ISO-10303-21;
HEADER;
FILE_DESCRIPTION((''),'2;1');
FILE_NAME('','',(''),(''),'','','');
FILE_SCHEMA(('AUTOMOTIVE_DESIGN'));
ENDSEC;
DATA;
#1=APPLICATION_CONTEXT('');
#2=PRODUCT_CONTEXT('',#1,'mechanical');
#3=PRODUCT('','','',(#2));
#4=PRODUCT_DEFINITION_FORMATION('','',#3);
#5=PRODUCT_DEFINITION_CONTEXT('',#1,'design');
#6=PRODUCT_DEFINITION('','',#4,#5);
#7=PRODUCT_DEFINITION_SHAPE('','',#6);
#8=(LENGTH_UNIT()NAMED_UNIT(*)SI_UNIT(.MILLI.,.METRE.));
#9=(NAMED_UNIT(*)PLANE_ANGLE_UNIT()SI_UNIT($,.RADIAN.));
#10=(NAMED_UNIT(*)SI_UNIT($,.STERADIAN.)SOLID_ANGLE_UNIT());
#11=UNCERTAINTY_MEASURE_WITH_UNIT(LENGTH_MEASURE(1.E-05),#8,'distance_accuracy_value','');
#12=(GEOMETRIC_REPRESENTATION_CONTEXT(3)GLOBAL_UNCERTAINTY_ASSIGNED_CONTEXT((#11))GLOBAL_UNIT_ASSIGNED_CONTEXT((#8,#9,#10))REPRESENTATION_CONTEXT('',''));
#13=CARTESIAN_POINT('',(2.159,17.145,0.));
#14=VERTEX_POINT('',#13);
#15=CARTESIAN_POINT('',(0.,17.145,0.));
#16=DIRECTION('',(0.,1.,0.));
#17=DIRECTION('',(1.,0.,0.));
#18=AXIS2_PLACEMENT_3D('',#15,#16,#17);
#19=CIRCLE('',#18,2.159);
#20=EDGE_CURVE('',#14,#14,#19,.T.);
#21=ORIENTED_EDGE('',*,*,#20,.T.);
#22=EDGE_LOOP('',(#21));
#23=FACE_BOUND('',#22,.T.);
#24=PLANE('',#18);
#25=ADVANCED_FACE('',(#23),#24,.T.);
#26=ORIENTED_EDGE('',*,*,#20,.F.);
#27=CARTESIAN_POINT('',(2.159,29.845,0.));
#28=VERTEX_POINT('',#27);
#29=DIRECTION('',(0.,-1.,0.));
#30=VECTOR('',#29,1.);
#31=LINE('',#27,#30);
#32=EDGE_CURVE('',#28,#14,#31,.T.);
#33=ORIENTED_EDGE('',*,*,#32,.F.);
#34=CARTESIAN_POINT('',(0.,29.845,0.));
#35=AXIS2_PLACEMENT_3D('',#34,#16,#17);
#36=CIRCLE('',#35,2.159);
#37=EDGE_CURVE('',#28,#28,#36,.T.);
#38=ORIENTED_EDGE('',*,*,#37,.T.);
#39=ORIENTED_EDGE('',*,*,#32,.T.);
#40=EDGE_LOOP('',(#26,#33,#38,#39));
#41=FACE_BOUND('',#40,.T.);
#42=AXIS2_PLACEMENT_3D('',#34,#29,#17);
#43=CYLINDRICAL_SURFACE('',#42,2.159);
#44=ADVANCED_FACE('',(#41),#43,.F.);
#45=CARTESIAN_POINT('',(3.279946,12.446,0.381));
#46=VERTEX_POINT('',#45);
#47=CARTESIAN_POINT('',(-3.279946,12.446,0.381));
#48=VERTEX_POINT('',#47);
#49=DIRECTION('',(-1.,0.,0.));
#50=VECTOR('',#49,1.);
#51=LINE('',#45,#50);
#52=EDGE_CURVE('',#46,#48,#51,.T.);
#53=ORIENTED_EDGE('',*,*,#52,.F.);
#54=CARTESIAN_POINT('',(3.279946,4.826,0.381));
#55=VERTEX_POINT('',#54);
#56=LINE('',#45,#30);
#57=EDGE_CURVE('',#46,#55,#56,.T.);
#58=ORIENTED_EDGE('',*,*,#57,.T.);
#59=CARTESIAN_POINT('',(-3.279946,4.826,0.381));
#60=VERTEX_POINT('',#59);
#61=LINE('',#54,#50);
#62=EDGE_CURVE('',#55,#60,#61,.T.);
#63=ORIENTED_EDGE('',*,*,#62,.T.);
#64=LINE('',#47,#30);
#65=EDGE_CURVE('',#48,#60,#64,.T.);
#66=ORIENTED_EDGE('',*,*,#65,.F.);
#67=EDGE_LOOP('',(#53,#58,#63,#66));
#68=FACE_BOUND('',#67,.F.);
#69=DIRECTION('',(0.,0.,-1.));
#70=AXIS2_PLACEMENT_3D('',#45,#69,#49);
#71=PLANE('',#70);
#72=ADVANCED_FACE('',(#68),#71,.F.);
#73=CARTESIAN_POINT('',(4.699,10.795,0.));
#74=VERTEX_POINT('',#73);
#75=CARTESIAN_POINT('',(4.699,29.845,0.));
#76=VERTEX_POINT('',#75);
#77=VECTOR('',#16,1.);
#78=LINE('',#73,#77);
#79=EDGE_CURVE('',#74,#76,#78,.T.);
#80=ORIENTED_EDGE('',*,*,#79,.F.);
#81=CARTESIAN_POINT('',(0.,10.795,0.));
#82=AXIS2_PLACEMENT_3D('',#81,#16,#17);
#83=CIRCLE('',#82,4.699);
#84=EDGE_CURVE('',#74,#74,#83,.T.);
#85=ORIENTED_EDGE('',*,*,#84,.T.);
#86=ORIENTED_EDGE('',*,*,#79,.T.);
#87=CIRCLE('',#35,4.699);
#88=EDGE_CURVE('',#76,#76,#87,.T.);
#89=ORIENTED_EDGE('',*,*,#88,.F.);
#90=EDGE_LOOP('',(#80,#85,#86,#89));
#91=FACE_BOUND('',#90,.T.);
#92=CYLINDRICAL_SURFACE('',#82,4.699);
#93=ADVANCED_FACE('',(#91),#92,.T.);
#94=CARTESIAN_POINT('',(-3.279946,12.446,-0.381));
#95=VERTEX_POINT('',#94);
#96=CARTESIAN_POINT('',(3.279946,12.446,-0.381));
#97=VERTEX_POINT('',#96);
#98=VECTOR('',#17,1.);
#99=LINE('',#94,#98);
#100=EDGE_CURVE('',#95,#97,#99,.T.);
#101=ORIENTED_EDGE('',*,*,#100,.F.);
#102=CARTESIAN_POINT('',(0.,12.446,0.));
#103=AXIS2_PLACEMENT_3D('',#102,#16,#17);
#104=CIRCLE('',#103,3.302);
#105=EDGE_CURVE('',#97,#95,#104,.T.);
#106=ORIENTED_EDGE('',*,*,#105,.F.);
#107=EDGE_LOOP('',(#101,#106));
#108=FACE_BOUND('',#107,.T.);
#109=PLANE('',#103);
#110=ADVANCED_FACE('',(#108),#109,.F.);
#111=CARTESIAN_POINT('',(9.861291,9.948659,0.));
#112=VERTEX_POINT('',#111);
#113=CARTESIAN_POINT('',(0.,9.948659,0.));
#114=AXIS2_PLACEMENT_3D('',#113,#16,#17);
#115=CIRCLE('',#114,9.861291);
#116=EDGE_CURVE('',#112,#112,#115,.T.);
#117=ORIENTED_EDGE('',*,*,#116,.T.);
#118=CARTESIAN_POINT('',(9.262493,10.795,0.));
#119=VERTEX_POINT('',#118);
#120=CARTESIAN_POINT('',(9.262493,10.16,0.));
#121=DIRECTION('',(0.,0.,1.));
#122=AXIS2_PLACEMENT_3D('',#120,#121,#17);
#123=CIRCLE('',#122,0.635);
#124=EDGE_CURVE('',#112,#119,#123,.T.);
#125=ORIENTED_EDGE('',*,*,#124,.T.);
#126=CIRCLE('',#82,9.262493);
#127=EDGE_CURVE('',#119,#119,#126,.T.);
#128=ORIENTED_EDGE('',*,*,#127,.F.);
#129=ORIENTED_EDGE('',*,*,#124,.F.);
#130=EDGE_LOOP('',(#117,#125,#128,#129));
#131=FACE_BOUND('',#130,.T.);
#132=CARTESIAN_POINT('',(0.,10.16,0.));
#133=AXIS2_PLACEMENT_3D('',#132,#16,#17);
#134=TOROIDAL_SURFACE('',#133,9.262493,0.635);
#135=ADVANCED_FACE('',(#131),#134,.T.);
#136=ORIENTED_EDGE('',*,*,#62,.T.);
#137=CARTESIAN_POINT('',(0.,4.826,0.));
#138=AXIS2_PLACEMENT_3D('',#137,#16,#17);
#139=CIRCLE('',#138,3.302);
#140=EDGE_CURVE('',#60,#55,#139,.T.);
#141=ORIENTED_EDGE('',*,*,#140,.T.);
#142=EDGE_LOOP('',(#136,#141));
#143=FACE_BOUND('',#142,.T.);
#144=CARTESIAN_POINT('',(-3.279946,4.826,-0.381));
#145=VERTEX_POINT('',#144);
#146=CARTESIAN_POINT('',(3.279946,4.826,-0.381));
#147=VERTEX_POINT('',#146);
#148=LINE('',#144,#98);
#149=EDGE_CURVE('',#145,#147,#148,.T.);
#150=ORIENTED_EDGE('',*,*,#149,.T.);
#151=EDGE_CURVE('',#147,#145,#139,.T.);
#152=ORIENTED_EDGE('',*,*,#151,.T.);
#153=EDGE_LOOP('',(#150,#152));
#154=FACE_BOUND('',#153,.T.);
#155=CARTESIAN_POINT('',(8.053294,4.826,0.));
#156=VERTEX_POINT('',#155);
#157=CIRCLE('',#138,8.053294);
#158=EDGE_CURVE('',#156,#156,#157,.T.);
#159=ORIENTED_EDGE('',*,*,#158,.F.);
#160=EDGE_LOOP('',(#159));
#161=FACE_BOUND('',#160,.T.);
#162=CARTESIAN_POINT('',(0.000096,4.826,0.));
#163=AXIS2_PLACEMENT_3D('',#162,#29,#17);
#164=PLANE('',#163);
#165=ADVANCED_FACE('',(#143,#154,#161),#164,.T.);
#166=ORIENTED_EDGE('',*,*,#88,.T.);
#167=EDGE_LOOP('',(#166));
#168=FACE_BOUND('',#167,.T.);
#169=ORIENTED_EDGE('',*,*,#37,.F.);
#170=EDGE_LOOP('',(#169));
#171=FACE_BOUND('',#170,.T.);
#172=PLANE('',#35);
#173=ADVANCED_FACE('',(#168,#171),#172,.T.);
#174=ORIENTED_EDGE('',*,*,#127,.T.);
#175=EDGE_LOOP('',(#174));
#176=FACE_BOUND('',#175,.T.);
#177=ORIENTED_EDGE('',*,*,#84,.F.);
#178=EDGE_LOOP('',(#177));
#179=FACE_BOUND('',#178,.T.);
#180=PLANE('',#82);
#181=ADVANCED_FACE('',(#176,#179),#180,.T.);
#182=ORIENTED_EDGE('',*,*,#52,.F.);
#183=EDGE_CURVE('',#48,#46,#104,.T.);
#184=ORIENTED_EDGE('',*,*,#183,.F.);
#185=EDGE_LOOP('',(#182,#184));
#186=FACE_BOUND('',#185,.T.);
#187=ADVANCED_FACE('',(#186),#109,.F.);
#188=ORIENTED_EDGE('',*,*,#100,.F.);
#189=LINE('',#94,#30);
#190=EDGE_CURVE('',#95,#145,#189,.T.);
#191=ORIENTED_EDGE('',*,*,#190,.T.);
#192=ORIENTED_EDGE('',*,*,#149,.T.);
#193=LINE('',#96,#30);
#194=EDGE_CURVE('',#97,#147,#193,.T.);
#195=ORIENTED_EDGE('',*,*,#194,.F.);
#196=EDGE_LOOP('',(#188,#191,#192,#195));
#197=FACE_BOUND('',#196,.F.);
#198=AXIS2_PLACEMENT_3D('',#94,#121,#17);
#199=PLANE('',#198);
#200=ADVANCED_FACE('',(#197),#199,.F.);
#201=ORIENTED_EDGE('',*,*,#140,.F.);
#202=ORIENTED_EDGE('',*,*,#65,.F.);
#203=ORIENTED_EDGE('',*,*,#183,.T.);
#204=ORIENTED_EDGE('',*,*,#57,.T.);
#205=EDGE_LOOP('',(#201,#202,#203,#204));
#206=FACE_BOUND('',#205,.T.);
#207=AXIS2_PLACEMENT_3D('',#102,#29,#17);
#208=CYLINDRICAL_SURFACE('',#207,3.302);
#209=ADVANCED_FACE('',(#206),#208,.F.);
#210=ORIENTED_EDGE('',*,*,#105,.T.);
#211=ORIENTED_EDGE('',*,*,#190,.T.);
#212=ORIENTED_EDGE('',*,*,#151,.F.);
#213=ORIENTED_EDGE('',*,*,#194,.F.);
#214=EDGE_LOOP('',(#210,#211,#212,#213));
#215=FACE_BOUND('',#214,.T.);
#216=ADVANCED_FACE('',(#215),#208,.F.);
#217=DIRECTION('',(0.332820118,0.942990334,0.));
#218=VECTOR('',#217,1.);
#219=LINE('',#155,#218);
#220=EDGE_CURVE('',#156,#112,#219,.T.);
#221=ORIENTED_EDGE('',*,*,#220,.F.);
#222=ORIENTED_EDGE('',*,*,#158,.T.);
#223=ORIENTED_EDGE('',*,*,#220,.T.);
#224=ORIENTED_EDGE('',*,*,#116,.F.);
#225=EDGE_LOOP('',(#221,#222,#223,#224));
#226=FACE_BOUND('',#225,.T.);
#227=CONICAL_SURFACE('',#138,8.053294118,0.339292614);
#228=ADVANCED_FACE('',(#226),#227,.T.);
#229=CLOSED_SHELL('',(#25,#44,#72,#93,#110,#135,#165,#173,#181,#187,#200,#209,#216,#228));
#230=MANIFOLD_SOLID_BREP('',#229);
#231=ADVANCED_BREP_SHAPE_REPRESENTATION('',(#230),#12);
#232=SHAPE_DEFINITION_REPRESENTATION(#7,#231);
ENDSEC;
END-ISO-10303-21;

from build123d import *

# Parameters (mm, degrees)
F3_DEPTH = 7.62
F4_R     = 0.635


with BuildPart() as f1:
    # F0 (on Top) → F1 (revolve)
    with BuildSketch(Plane.XY):
        Polygon((3.302, 7.62), (3.302, 4.826), (8.0532941176, 4.826), (10.16, 10.795), (4.699, 10.795), (3.302, 10.795), align=None)
        Polygon((0, 17.145), (0, 12.446), (3.302, 12.446), (3.302, 10.795), (4.699, 10.795), (4.699, 29.845), (2.159, 29.845), (2.159, 17.145), align=None)
    revolve(axis=Axis((0, 23.495, 0), (0, 1, 0)))

    # F2 (on face) → F3 (join)
    with BuildSketch(Plane.XZ.offset(-12.446)):
        with BuildLine():
            ThreePointArc((-3.2799455788, 0.381), (-3.302, 0), (-3.2799455788, -0.381))
            Line((-3.2799455788, -0.381), (3.2799455788, -0.381))
            ThreePointArc((3.2799455788, -0.381), (3.2964817838, -0.1908188916), (3.302, 0))
            ThreePointArc((3.302, 0), (3.2964817838, 0.1908188916), (3.2799455788, 0.381))
            Line((3.2799455788, 0.381), (-3.2799455788, 0.381))
        make_face()
    extrude(amount=F3_DEPTH)

    # F4
    f4_edges = [f1.edges().sort_by_distance(p)[0] for p in [
        (-10.16, 10.795, 0),
    ]]
    fillet(f4_edges, radius=F4_R)


solid = f1.part
